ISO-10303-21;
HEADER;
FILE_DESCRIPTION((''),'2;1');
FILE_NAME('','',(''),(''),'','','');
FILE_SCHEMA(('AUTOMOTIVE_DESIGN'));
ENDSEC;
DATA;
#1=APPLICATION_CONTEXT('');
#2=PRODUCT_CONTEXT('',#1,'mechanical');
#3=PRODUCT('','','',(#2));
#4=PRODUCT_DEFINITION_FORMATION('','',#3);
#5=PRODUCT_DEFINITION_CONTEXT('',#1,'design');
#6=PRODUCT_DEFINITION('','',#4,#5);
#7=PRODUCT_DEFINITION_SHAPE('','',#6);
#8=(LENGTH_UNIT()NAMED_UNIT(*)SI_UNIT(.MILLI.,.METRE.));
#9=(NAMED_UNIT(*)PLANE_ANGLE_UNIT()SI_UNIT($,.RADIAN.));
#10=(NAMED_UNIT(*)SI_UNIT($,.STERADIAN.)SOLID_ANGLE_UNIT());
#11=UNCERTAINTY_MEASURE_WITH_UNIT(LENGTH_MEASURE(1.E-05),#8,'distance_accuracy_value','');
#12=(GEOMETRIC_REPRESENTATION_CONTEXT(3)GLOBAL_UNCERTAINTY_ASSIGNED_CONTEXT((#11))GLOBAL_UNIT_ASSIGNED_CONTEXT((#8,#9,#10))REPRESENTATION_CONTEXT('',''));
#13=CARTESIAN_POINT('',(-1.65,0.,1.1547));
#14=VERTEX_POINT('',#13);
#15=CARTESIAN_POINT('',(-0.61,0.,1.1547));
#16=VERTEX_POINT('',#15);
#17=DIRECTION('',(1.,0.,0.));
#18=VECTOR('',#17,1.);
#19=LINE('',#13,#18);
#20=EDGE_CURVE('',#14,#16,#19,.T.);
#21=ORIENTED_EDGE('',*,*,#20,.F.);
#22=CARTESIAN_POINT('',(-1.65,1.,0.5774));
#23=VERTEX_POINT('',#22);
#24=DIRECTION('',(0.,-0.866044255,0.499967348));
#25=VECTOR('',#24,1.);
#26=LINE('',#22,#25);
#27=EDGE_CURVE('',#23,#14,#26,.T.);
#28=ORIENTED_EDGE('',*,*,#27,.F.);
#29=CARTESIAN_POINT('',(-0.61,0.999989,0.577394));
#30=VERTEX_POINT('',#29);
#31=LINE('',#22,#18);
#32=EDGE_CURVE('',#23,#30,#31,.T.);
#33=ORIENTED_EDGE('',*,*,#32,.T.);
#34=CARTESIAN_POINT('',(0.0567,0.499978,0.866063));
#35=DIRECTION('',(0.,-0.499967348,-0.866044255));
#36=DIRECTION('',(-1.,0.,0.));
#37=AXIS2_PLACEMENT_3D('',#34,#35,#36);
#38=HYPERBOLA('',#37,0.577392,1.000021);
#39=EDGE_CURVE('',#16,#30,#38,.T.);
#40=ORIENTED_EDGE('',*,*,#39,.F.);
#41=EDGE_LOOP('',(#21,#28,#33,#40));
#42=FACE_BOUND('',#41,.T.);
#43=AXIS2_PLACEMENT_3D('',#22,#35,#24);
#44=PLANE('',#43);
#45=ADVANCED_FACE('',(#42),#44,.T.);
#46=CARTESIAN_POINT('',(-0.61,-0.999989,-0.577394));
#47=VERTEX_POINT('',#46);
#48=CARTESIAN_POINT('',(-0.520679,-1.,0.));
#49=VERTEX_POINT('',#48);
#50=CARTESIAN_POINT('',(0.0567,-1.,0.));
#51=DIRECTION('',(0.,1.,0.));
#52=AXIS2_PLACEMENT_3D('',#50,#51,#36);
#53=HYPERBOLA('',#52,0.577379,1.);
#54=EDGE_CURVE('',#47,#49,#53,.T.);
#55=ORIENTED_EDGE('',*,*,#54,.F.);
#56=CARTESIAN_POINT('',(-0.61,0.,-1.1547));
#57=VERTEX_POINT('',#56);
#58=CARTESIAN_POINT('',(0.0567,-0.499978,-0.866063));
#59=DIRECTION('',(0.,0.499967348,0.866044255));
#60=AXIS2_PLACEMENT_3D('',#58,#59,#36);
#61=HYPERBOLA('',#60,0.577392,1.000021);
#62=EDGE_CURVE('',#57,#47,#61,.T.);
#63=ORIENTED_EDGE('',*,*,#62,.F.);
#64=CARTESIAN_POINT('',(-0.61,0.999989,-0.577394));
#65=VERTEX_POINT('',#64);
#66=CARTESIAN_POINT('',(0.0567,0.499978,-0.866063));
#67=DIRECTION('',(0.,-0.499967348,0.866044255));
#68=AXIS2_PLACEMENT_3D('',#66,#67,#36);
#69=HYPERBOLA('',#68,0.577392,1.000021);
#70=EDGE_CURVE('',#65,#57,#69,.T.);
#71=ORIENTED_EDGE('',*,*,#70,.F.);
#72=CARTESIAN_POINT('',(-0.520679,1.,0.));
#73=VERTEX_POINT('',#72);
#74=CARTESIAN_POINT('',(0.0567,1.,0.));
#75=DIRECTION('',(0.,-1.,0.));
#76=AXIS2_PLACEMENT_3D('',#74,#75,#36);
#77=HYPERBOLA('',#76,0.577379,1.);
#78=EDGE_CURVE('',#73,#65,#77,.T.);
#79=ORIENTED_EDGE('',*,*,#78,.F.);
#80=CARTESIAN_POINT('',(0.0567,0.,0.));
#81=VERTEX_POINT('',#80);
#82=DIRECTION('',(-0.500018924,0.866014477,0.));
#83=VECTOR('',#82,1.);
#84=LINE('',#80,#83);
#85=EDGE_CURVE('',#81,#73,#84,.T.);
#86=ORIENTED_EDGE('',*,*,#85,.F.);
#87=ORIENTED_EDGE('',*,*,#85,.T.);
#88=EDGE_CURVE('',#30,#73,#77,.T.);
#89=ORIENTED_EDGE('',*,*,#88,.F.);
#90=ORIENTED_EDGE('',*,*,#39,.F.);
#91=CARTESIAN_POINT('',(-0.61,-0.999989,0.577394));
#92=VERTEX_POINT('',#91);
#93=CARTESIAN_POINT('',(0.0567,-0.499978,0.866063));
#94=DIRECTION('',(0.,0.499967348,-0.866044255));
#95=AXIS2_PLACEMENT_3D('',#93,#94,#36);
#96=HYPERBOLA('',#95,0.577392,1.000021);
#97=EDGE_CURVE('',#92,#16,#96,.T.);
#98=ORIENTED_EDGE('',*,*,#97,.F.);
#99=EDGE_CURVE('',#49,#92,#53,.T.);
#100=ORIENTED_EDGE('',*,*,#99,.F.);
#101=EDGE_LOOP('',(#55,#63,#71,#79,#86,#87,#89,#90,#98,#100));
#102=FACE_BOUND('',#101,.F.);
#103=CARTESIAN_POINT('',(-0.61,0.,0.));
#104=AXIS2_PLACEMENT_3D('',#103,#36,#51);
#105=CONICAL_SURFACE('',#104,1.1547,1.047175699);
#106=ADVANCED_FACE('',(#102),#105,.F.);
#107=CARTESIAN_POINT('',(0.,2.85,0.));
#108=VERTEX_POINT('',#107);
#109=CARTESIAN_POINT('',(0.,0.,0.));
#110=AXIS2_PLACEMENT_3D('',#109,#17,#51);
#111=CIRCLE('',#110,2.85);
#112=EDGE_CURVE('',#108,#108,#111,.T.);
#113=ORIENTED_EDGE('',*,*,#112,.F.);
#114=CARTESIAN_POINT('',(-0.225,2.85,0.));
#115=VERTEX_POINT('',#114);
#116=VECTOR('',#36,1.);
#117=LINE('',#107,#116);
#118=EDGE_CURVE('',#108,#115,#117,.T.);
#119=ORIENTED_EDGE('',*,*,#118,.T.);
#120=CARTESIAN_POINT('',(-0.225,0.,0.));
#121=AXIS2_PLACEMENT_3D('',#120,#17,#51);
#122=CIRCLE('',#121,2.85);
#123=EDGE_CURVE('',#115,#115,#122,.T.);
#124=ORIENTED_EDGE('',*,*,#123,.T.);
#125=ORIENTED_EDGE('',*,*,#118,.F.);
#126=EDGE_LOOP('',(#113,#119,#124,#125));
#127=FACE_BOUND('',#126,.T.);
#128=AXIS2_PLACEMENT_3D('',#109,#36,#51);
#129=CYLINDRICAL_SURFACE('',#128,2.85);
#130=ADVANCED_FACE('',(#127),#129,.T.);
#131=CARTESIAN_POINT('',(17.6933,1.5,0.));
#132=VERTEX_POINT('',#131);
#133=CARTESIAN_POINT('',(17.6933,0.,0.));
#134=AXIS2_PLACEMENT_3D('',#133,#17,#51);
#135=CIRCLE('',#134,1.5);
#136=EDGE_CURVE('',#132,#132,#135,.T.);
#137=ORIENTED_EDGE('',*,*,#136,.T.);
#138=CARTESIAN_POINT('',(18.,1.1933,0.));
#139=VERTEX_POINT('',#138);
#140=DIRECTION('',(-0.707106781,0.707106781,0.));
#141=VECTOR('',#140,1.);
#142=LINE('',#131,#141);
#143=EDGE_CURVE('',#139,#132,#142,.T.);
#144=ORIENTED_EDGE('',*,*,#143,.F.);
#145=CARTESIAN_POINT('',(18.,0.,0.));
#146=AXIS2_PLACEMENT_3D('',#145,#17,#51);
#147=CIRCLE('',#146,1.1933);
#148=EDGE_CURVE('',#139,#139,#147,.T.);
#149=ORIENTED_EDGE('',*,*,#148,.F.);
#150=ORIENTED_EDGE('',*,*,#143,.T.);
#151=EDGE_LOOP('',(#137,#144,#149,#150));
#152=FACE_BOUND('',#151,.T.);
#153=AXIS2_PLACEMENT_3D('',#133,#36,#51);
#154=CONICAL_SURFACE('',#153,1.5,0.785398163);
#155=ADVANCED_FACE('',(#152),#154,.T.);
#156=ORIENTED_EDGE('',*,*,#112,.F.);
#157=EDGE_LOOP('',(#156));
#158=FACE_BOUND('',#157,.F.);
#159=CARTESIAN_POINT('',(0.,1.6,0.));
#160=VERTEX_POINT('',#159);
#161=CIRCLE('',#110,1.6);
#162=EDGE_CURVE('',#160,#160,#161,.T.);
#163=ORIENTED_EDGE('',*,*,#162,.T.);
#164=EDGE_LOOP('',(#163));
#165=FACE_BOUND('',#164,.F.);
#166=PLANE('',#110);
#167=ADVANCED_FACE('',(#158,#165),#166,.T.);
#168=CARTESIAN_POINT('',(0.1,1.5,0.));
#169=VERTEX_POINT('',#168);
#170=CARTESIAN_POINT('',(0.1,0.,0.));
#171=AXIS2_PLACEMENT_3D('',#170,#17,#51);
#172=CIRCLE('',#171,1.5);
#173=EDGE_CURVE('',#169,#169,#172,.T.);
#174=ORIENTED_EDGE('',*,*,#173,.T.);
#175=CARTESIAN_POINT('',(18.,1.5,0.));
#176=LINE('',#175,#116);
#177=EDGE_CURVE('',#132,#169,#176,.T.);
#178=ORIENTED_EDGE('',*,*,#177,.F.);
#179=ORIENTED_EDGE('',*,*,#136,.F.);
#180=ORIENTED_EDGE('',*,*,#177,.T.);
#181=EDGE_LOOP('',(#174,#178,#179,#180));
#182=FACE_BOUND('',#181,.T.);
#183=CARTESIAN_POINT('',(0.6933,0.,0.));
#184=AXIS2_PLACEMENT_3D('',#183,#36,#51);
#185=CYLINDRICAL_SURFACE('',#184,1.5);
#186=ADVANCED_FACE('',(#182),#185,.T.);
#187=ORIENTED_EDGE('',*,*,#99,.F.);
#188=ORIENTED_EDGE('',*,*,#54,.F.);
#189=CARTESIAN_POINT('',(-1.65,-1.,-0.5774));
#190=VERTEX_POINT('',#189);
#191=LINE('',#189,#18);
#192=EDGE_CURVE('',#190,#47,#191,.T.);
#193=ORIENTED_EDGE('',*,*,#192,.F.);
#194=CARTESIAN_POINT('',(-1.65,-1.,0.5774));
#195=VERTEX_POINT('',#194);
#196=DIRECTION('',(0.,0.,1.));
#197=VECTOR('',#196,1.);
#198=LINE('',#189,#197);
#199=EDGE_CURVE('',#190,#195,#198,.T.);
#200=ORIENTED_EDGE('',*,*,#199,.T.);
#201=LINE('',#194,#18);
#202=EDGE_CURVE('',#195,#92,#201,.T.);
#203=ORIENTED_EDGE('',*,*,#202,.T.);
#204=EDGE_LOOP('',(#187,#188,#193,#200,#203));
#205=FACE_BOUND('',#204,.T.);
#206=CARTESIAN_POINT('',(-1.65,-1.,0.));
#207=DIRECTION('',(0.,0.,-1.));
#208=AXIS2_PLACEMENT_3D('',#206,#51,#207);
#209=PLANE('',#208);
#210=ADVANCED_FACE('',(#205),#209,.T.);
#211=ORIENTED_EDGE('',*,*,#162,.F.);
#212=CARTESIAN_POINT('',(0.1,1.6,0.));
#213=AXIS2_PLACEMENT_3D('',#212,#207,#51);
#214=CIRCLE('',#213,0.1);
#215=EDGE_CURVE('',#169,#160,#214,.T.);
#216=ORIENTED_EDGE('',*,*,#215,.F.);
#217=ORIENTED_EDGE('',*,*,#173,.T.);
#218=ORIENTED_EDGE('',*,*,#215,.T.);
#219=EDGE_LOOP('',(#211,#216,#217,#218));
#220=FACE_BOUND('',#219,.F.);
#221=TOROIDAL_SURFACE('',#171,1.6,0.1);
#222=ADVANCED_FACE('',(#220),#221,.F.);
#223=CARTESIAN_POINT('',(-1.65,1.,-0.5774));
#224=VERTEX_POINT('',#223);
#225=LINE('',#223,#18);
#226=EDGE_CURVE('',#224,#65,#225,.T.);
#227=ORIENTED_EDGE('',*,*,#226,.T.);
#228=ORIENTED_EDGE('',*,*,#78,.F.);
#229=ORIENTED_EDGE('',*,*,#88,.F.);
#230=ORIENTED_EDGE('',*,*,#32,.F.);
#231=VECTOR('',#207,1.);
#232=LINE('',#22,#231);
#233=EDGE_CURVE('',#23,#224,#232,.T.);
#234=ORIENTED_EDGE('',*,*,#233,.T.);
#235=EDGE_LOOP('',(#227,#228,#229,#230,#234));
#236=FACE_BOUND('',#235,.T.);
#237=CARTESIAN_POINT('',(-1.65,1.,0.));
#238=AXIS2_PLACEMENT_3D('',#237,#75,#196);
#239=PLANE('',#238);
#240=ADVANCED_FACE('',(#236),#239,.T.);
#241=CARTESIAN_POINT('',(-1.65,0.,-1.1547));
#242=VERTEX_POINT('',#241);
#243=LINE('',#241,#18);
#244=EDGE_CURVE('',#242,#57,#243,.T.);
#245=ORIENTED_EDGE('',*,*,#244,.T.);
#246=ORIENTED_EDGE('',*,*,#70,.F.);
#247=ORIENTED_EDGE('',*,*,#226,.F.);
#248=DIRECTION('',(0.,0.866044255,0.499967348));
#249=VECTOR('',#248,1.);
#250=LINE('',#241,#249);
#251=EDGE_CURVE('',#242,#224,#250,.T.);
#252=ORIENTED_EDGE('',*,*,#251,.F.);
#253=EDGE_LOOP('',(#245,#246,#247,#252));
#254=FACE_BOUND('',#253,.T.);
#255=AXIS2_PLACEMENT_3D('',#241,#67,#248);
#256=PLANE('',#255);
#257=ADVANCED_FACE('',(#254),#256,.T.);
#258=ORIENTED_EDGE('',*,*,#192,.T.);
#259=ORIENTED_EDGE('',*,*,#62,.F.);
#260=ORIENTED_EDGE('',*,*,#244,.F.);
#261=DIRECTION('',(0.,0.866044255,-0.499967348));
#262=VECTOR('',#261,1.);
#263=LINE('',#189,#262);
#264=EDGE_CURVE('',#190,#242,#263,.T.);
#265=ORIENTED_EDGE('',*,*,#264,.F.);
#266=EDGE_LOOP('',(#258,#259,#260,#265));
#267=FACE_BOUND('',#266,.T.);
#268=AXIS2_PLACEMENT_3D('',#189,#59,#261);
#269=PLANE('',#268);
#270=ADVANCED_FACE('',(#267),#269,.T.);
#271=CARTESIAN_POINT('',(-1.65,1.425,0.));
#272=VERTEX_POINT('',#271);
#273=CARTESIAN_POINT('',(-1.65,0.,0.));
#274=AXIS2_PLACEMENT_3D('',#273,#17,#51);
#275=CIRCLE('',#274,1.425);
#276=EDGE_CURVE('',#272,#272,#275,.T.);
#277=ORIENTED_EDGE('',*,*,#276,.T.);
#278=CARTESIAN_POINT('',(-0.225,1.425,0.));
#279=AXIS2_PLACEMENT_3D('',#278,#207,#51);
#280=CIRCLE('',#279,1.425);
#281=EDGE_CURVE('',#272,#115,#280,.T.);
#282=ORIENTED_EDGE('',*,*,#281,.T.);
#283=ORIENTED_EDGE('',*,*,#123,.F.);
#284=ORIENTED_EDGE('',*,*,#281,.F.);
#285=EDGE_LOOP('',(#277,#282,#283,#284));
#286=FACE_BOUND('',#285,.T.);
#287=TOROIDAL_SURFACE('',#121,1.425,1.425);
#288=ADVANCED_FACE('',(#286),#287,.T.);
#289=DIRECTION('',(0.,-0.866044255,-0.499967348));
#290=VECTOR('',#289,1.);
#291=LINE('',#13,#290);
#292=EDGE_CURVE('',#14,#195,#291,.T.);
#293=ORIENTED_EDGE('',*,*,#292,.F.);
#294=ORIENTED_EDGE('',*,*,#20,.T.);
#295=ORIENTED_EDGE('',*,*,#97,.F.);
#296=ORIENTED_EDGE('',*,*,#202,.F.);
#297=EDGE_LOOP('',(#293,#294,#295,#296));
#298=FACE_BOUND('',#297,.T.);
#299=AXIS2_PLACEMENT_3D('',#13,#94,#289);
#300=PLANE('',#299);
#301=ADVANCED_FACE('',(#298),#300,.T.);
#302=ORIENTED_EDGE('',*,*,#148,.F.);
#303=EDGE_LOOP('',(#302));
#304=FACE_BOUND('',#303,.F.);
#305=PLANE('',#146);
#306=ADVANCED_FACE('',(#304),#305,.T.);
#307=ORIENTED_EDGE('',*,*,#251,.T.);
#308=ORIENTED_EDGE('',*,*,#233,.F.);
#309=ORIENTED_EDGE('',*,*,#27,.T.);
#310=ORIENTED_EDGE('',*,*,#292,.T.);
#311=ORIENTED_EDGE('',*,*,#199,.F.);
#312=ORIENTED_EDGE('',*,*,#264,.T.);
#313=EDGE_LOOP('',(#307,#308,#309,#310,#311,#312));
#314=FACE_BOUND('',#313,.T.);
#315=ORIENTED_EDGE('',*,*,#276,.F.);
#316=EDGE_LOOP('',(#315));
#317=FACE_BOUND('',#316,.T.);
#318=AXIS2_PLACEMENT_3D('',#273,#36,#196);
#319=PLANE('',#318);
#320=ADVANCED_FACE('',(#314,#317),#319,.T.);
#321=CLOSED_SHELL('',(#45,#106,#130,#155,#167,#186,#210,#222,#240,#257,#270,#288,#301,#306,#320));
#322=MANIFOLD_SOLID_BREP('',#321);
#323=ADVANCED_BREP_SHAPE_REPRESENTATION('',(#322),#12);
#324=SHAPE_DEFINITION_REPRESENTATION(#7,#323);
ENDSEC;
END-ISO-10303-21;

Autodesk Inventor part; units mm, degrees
ref_plane "YZ Plane" through (0, 0, 0) normal (1, 0, 0) x (0, 1, 0)
ref_plane "XZ Plane" through (0, 0, 0) normal (0, 1, 0) x (-1, 0, 0)
sketch "Sketch1" plane through (0, 0, 0) normal (0, 0, 1) x (1, 0, 0)
  line L0 (0.0567, 0) -> (18, 0)
  line L1 (18, 0) -> (18, 1.5)
  line L2 (18, 1.5) -> (1, 1.5)
  line L3 (1, 1.5) -> (0.6933, 1.5)
  line L4 (0.6933, 1.5) -> (0, 1.5)
  line L5 (0, 1.5) -> (0, 2.85)
  line L6 (0, 2.85) -> (-1.65, 2.85)
  line L7 (-1.65, 2.85) -> (-1.65, 1.1547)
  line L8 (-1.65, 1.1547) -> (-0.61, 1.1547)
  line L9 (-0.61, 1.1547) -> (0.0567, 0)
  line L10 (-5.58, 0) -> (21.93, 0) projected
  line L11 (0, -0.57) -> (0, 3.42) projected
  line L12 (1, 1.5) -> (0, 1.5) construction
  dimension "d0" = 17
  dimension "d1" = 0.3067
  dimension "d2" = 1.65
  dimension "d3" = 1.04
  dimension "d4" = 60
  dimension "d5" = 3
  dimension "d6" = 3
  dimension "d7" = 2.3094
  dimension "d8" = 5.7
  dimension "d19" = 18
revolve "Body" add sketch "Sketch1" angle 360 about axis through (0.0567, 0, 0) along (1, 0, 0) contours L9 L11 L4 L3 L2 L1 L0 | L9 L8 L7 L6 L5 L11
sketch "Sketch2" plane through (-1.65, 0, 0) normal (-1, 0, 0) x (0, 0, 1)
  circle A0 centre (0, 0) radius 1.1547 projected
  line L0 (0, -3.99) -> (0, 3.99) projected
  line L1 (-3.99, 0) -> (3.99, 0) projected
  line L2 (1.1547, 0) -> (0.5774, -1)
  line L3 (0.5774, -1) -> (-0.5774, -1)
  line L4 (-0.5774, -1) -> (-1.1547, 0)
  line L5 (-1.1547, 0) -> (-0.5774, 1)
  line L6 (-0.5774, 1) -> (0.5774, 1)
  line L7 (0.5774, 1) -> (1.1547, 0)
extrude "Slot" add sketch "Sketch2" against normal up to next contours L7 A0 | A0 L2 | L6 L0 A0 | A0 L0 L3 | L0 L6 A0 | A0 L3 L0 | L4 A0 | A0 L5
fillet "Fillet1" radius 1.425 1 edges at (-1.65, -2.85, 0)
thread "Thread" size "M3x0.5" class "4g6g" standard "ANSI Metric M Profile" length 17
chamfer "Chamfer1" distance 0.3067 distance2 0.3067 1 edges at (18, -1.5, 0) measured on face at (18, -0.4645, -0.4115)
fillet "Fillet2" radius 0.1 1 edges at (0, -1.5, 0)
ref_plane "Work Plane1" through (30, 0, 0) normal (0, -0.5, 0.8660254) x (1, 0, 0)
equation "\"d29\" = R"
equation "\"d12\" = GEL"
equation "\"d14\" = -0.5 * SPD + 0.5 * GD"
equation "\"d15\" = GUL"
equation "\"d16\" = RR"
equation "\"d0\" = GEL"
equation "\"d1\" = GAL"
equation "\"d2\" = KOH"
equation "\"d3\" = INTI"
equation "\"d5\" = GD"
equation "\"d6\" = BDM"
equation "\"d7\" = 1.1547 * SW"
equation "\"d8\" = KOD"
equation "\"d19\" = NLG"
equation "\"GD\" = NND"
equation "\"NLG\" = 18"
equation "\"GEL\" = 17"
equation "\"KOD\" = 5.7"
equation "\"KOH\" = 1.65"
equation "\"INTI\" = 1.04"
equation "\"GAL\" = 0.61345 * PTC"
equation "\"GUL\" = 0.61345 * PTC"
equation "\"BDM\" = NND"
equation "\"SW\" = 2"
equation "\"RR\" = 1.425"
equation "\"SPD\" = 2.38655"
equation "\"d28\" = R"
equation "\"R\" = 0.1"
equation "\"TOA\" = 30deg"
equation "\"THREADDIA\" = 3"
equation "\"KOD1\" = KOD - 2 * RR"
equation "\"PTC\" = 0.5"
equation "\"NND\" = 3"
equation "\"E0\" = 1.155 * SW"
equation "\"GD1\" = THREADDIA - 1.2269 * PTC"
properties part number "ANSI B18.3.4M - M3 x 0.5 x 6, BHSBHCSM" material "Steel, Mild"
